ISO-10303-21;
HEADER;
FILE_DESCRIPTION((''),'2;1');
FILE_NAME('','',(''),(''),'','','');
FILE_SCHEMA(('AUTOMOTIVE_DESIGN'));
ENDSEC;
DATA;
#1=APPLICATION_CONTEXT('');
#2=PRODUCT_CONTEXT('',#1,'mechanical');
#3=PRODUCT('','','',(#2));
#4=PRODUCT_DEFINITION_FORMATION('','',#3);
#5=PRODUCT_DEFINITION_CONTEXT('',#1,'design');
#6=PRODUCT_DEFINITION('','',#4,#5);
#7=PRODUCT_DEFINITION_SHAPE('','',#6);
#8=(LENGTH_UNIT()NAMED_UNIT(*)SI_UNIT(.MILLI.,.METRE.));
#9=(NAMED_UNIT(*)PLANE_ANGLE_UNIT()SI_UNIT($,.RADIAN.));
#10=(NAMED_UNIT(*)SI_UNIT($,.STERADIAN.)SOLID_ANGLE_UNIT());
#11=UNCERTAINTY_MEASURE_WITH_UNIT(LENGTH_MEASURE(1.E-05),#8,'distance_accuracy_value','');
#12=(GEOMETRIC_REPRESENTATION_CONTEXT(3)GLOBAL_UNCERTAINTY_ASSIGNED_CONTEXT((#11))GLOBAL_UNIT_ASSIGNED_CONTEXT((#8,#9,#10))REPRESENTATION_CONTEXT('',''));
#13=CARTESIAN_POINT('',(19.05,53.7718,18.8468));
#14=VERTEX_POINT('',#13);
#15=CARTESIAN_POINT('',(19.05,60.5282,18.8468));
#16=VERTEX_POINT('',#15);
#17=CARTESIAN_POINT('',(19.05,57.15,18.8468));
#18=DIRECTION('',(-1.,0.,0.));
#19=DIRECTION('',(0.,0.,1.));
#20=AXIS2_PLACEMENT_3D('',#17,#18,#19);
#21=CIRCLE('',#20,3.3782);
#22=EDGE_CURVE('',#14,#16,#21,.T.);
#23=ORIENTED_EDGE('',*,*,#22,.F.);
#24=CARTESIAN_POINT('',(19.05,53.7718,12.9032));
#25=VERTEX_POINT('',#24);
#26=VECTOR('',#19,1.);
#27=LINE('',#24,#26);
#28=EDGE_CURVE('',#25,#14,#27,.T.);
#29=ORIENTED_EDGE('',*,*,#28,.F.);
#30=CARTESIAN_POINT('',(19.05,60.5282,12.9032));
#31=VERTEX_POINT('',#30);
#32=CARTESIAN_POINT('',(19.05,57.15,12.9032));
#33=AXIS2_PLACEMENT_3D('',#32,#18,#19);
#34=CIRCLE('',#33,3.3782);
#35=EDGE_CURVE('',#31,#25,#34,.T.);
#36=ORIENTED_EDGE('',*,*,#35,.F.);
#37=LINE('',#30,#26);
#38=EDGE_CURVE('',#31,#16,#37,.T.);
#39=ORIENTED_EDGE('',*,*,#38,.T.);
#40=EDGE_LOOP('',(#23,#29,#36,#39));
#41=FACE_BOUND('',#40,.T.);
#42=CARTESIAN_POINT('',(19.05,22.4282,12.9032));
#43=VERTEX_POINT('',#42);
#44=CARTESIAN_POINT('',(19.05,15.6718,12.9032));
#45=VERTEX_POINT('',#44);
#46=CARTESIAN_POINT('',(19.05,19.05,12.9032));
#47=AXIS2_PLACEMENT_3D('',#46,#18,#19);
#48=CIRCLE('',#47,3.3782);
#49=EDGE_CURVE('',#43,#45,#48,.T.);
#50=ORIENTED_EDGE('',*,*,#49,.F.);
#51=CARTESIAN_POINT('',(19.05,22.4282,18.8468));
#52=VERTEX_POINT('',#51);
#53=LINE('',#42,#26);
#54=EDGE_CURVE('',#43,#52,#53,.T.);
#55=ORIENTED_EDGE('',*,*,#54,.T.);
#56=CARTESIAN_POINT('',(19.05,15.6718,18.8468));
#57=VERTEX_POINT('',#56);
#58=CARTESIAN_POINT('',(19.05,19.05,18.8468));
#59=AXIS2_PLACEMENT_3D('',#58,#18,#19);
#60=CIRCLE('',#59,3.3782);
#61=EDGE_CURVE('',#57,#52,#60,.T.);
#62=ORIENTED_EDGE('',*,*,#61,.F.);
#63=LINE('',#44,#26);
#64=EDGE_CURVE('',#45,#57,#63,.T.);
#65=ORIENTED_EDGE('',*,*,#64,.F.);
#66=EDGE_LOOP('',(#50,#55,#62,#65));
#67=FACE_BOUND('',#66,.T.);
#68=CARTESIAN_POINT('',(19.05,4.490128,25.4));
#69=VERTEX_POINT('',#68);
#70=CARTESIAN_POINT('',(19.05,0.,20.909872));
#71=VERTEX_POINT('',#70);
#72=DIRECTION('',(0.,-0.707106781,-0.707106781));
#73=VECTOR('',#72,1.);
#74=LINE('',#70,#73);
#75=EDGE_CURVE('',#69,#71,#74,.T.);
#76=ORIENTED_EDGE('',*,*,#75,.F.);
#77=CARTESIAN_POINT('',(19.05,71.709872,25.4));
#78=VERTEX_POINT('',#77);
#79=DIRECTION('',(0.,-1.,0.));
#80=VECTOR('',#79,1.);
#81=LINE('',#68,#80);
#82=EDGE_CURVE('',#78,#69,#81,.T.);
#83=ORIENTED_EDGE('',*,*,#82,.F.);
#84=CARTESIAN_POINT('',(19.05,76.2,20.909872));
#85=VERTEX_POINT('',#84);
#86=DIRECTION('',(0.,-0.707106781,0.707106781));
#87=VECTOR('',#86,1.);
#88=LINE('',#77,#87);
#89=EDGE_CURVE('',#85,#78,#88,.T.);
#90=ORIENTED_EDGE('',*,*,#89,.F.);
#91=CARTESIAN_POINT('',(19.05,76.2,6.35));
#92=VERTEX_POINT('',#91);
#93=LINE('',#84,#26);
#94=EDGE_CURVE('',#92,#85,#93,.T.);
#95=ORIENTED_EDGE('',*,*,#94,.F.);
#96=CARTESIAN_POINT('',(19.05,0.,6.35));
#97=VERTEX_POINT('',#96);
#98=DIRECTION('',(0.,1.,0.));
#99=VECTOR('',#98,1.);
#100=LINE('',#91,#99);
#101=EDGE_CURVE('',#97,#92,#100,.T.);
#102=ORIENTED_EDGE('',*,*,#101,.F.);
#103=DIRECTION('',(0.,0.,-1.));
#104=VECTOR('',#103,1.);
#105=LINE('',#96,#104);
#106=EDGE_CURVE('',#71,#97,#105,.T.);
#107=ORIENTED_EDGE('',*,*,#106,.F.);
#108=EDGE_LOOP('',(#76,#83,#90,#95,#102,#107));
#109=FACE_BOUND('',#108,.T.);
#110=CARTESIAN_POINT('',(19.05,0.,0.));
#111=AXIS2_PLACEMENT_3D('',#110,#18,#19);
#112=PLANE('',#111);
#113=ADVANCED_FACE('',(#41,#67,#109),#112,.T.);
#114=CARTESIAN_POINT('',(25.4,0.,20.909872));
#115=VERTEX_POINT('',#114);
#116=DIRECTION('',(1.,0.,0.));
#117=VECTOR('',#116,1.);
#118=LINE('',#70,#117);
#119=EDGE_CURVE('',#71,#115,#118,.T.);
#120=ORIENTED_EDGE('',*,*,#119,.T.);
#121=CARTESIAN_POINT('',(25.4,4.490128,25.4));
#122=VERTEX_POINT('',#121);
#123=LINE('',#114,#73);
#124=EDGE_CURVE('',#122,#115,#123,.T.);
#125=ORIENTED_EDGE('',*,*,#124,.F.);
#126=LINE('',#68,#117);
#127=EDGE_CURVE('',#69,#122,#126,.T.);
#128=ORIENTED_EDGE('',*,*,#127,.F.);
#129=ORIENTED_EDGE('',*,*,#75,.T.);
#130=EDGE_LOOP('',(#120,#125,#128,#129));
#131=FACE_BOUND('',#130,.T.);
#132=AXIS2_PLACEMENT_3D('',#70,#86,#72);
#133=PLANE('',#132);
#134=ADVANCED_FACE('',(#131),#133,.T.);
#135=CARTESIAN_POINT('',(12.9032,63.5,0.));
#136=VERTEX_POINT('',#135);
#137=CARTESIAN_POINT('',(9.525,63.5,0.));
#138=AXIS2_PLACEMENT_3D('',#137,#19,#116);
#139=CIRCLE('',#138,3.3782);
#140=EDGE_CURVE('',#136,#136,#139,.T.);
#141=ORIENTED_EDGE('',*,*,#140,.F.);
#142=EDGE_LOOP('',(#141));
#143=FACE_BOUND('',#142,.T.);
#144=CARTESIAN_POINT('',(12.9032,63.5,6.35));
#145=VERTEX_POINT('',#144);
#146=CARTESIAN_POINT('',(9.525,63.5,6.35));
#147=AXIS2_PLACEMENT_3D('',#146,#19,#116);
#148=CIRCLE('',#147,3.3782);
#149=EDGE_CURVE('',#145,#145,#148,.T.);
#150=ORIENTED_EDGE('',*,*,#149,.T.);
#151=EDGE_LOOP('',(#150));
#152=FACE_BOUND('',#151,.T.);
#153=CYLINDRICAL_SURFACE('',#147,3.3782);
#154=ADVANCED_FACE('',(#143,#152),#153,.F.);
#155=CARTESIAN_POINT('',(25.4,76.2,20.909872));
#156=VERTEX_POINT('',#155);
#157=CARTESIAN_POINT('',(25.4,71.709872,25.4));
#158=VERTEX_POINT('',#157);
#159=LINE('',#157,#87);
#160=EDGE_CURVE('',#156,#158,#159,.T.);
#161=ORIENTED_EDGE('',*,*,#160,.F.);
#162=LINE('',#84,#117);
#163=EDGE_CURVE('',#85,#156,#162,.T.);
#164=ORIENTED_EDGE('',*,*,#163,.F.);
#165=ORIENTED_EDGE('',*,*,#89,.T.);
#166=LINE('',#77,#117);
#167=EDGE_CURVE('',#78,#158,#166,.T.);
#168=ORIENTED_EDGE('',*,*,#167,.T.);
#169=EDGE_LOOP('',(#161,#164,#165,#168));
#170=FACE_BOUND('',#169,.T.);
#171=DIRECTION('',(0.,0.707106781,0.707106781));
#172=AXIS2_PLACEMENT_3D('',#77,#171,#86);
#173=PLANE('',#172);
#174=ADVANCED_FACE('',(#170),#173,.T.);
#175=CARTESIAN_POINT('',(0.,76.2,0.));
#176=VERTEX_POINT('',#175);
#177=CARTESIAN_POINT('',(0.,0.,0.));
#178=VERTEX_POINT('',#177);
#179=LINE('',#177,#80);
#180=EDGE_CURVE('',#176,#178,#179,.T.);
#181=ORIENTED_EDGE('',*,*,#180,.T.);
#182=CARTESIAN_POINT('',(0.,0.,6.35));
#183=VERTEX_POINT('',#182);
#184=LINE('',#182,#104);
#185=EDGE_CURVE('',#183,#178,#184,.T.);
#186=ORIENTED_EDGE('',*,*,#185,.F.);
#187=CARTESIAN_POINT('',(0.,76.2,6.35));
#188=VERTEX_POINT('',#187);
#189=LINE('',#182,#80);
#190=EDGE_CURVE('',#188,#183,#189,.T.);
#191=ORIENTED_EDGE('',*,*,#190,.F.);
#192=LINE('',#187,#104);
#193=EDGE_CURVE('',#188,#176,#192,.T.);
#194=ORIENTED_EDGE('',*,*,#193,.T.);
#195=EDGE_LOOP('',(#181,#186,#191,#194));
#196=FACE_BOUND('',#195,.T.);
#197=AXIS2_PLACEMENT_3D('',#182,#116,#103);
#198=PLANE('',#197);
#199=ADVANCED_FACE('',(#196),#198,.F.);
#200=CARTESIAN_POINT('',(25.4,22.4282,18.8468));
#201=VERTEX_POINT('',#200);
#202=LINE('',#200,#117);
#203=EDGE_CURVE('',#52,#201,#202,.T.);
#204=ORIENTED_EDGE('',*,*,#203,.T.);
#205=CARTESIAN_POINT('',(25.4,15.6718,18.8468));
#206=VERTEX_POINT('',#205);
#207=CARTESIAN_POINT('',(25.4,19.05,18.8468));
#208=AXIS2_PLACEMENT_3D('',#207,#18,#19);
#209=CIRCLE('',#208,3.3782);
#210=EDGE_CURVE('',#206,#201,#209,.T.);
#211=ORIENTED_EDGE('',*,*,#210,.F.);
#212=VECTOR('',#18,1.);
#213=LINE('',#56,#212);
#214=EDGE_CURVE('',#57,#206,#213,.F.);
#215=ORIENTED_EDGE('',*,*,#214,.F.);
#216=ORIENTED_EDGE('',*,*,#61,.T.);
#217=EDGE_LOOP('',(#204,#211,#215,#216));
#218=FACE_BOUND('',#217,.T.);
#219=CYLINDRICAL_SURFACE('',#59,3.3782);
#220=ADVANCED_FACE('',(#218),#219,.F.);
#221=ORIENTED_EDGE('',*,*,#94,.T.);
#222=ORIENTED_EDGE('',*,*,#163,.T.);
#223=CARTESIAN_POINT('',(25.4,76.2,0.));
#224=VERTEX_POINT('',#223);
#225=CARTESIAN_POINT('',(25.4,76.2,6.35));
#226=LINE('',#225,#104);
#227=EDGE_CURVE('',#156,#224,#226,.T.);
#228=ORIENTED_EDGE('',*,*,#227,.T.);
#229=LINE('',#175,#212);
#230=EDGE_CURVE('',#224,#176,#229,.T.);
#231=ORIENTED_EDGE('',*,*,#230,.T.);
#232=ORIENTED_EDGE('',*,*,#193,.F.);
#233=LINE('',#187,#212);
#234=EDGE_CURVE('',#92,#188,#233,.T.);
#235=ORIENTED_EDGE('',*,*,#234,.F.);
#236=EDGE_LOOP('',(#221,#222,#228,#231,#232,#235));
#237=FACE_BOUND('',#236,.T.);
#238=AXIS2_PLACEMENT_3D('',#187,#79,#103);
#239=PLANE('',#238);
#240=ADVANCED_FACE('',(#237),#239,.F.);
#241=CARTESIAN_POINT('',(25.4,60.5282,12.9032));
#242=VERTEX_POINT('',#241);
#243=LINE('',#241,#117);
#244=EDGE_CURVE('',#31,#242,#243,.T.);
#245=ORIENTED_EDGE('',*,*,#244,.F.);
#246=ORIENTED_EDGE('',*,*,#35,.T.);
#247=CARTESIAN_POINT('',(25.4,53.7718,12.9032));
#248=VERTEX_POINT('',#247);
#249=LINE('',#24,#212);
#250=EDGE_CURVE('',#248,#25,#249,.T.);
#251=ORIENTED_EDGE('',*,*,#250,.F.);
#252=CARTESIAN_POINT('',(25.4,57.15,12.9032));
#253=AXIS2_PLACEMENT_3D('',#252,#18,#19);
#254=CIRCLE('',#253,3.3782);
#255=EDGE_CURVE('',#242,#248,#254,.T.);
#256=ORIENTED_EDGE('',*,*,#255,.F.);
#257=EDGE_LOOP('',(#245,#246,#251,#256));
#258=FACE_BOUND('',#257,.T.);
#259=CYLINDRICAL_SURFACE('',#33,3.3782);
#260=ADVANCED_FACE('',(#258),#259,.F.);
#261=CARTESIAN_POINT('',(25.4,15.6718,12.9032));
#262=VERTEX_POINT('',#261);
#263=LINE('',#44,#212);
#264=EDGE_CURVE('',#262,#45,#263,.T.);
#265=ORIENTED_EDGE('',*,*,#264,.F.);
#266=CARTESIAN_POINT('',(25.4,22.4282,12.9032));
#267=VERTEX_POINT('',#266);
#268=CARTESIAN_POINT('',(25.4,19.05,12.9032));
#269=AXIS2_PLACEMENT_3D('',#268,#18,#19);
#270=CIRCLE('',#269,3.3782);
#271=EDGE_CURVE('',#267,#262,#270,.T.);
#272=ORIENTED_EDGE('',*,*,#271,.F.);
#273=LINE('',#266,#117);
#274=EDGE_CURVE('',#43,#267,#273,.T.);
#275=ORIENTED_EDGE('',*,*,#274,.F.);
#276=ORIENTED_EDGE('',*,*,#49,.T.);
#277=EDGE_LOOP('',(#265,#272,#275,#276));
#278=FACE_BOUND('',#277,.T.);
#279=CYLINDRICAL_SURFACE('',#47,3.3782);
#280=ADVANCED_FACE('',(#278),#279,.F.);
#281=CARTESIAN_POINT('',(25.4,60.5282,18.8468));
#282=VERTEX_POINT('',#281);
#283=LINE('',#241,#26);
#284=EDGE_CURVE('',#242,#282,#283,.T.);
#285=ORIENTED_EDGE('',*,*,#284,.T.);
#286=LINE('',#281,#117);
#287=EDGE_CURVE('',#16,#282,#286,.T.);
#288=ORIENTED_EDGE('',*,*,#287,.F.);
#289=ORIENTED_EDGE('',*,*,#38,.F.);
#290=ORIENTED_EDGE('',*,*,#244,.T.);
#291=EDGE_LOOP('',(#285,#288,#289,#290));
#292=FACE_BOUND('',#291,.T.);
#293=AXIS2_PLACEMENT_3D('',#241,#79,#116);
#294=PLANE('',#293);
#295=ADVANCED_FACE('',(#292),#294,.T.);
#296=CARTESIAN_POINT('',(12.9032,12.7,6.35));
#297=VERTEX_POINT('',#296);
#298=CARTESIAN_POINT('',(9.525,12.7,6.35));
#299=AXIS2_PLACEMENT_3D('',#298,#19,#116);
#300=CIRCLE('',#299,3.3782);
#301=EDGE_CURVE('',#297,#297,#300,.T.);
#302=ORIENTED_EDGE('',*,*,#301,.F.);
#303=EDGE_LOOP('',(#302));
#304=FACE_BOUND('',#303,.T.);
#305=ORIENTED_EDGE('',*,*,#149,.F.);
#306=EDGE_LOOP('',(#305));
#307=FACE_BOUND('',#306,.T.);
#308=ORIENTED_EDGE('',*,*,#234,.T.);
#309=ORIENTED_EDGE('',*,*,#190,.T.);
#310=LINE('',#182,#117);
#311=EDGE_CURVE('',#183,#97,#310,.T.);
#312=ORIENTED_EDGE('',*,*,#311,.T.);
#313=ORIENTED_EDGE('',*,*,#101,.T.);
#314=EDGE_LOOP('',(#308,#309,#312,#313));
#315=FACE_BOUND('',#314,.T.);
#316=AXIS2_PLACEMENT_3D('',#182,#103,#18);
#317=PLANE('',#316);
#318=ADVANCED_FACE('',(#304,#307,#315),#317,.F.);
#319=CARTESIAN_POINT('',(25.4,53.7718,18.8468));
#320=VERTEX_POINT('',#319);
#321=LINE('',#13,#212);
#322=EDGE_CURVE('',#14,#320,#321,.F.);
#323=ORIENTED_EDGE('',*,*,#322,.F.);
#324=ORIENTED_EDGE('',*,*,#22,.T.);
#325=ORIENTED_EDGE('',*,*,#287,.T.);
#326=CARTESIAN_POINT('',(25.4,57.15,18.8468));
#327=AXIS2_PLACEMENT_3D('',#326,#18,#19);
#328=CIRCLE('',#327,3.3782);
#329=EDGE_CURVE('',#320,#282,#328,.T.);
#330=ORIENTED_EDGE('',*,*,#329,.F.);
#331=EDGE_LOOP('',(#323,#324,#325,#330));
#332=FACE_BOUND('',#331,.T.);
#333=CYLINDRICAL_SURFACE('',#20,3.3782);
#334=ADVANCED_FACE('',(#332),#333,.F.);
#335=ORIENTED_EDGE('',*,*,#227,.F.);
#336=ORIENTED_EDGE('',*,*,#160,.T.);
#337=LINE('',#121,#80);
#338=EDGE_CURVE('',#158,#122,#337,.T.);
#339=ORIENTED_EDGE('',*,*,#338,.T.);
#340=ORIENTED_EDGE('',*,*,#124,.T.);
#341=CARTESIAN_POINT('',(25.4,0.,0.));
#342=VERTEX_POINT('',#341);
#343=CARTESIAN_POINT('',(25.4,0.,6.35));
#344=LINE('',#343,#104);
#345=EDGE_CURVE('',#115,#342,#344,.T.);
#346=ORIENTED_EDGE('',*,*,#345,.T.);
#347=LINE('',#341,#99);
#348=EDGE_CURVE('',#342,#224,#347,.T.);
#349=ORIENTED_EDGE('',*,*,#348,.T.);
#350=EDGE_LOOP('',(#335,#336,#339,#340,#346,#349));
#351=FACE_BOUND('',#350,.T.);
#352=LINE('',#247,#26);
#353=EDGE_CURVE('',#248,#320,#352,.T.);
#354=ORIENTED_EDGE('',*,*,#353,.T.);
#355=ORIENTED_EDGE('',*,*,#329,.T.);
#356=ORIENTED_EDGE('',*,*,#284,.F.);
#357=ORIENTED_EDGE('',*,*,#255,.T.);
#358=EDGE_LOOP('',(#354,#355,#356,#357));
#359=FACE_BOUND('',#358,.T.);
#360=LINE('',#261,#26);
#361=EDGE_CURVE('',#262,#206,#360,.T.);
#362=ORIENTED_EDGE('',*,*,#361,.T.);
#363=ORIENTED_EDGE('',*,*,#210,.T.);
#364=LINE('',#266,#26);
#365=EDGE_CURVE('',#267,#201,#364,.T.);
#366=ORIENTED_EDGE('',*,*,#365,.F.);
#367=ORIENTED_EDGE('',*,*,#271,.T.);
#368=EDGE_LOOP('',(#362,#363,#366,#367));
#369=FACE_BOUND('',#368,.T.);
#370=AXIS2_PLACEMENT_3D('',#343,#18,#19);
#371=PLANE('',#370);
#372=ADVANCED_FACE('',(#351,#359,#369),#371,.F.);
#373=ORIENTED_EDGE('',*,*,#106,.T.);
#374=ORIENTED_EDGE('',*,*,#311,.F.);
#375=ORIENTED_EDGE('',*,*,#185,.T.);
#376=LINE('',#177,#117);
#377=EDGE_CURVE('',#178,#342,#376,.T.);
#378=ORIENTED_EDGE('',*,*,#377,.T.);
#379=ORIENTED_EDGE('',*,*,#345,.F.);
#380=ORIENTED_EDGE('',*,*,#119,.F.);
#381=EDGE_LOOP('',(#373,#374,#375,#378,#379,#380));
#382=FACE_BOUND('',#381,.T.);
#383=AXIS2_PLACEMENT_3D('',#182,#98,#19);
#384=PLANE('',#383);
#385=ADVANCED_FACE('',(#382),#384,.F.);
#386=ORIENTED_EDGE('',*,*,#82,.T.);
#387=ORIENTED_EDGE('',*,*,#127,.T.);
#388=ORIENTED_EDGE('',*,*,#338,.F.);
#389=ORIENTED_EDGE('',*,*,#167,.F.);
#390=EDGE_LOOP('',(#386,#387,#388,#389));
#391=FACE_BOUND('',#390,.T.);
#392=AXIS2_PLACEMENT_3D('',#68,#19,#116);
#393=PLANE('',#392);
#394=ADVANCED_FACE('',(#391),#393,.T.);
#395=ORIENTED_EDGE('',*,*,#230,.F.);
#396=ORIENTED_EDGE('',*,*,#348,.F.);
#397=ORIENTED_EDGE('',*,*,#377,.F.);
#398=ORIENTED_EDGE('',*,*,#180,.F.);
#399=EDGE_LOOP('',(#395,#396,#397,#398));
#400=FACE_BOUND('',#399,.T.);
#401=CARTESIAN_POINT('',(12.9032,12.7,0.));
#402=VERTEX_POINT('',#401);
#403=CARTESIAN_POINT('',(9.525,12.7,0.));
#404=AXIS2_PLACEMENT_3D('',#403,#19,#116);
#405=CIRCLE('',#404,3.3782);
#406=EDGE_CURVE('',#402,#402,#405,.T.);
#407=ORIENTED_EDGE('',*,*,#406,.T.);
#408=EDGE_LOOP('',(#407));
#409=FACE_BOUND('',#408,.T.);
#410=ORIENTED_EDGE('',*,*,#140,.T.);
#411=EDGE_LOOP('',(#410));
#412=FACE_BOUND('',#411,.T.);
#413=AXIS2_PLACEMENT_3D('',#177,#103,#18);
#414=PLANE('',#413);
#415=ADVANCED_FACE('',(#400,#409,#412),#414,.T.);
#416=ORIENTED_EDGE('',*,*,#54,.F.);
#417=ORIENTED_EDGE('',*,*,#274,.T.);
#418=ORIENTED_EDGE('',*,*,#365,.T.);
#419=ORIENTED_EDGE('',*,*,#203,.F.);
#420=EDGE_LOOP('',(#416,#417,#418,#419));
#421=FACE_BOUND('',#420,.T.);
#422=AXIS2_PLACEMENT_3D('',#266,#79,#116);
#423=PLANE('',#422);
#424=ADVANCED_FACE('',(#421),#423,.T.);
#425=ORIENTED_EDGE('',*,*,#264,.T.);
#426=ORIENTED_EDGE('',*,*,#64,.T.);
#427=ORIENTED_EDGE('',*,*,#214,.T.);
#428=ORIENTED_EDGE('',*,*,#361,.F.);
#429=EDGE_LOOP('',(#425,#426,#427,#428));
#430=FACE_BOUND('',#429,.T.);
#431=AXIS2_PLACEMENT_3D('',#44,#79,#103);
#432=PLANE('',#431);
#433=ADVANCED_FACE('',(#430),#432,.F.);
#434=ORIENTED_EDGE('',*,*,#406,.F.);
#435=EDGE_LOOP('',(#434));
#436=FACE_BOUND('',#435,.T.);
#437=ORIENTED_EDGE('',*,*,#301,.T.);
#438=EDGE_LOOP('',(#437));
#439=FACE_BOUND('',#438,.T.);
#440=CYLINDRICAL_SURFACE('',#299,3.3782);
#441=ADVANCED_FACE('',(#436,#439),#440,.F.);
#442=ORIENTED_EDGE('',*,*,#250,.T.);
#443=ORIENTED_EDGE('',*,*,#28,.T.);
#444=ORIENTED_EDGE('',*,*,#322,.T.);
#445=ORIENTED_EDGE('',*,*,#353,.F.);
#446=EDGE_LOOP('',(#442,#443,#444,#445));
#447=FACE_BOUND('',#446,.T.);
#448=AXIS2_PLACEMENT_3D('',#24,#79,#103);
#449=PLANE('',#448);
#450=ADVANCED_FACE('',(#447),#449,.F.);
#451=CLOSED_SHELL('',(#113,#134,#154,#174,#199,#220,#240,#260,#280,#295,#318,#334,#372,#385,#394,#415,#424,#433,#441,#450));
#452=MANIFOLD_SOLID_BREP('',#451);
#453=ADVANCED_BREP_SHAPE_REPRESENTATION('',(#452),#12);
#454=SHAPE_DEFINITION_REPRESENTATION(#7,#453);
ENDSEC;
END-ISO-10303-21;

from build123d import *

# Parameters (mm, degrees)
SKETCH1_W                   = 25.4
SKETCH1_H                   = 76.2
BOSS_EXTRUDE1_DEPTH         = 6.35
BOSS_EXTRUDE2_DEPTH         = 6.35
F_1_4_START                 = 19.05
F_1_4_CLEARANCE_SLOT1_DEPTH = 6.35
F_1_4_CLEARANCE_HOLE1_D     = 6.7564


# Read off the part's stored shape, not the designer's step: 1/4 Clearance Slot1
with BuildPart() as part:
    # Sketch1 → Boss-Extrude1 (new body)
    with BuildSketch(Plane.XY):
        with Locations((12.7, 38.1)):
            Rectangle(SKETCH1_W, SKETCH1_H)
    extrude(amount=BOSS_EXTRUDE1_DEPTH)

    # Sketch2 → Boss-Extrude2 (add)
    with BuildSketch(Plane(origin=(25.4, 0, 0), x_dir=(0, 0, -1), z_dir=(1, 0, 0))):
        Polygon((-6.35, 76.2), (-6.35, 0), (-20.909871939, 0), (-25.4, 4.490128061), (-25.4, 71.709871939), (-20.909871939, 76.2), align=None)
    extrude(amount=-BOSS_EXTRUDE2_DEPTH)

    # 1/4 Clearance Slot1 outline → 1/4 Clearance Slot1 (cut)
    with BuildSketch(Plane.YZ.offset(F_1_4_START)):
        with BuildLine():
            ThreePointArc((22.4282, 18.8468), (19.05, 22.225), (15.6718, 18.8468))
            Line((15.6718, 18.8468), (15.6718, 12.9032))
            ThreePointArc((15.6718, 12.9032), (19.05, 9.525), (22.4282, 12.9032))
            Line((22.4282, 12.9032), (22.4282, 18.8468))
        make_face()
        with BuildLine():
            ThreePointArc((60.5282, 18.8468), (57.15, 22.225), (53.7718, 18.8468))
            Line((53.7718, 18.8468), (53.7718, 12.9032))
            ThreePointArc((53.7718, 12.9032), (57.15, 9.525), (60.5282, 12.9032))
            Line((60.5282, 12.9032), (60.5282, 18.8468))
        make_face()
    extrude(amount=F_1_4_CLEARANCE_SLOT1_DEPTH, mode=Mode.SUBTRACT)

    # 1/4 Clearance Hole1 (through all)
    with Locations(Plane.XY.offset(6.35)):
        with Locations((9.525, 63.5), (9.525, 12.7)):
            Hole(F_1_4_CLEARANCE_HOLE1_D / 2)


solid = part.part
